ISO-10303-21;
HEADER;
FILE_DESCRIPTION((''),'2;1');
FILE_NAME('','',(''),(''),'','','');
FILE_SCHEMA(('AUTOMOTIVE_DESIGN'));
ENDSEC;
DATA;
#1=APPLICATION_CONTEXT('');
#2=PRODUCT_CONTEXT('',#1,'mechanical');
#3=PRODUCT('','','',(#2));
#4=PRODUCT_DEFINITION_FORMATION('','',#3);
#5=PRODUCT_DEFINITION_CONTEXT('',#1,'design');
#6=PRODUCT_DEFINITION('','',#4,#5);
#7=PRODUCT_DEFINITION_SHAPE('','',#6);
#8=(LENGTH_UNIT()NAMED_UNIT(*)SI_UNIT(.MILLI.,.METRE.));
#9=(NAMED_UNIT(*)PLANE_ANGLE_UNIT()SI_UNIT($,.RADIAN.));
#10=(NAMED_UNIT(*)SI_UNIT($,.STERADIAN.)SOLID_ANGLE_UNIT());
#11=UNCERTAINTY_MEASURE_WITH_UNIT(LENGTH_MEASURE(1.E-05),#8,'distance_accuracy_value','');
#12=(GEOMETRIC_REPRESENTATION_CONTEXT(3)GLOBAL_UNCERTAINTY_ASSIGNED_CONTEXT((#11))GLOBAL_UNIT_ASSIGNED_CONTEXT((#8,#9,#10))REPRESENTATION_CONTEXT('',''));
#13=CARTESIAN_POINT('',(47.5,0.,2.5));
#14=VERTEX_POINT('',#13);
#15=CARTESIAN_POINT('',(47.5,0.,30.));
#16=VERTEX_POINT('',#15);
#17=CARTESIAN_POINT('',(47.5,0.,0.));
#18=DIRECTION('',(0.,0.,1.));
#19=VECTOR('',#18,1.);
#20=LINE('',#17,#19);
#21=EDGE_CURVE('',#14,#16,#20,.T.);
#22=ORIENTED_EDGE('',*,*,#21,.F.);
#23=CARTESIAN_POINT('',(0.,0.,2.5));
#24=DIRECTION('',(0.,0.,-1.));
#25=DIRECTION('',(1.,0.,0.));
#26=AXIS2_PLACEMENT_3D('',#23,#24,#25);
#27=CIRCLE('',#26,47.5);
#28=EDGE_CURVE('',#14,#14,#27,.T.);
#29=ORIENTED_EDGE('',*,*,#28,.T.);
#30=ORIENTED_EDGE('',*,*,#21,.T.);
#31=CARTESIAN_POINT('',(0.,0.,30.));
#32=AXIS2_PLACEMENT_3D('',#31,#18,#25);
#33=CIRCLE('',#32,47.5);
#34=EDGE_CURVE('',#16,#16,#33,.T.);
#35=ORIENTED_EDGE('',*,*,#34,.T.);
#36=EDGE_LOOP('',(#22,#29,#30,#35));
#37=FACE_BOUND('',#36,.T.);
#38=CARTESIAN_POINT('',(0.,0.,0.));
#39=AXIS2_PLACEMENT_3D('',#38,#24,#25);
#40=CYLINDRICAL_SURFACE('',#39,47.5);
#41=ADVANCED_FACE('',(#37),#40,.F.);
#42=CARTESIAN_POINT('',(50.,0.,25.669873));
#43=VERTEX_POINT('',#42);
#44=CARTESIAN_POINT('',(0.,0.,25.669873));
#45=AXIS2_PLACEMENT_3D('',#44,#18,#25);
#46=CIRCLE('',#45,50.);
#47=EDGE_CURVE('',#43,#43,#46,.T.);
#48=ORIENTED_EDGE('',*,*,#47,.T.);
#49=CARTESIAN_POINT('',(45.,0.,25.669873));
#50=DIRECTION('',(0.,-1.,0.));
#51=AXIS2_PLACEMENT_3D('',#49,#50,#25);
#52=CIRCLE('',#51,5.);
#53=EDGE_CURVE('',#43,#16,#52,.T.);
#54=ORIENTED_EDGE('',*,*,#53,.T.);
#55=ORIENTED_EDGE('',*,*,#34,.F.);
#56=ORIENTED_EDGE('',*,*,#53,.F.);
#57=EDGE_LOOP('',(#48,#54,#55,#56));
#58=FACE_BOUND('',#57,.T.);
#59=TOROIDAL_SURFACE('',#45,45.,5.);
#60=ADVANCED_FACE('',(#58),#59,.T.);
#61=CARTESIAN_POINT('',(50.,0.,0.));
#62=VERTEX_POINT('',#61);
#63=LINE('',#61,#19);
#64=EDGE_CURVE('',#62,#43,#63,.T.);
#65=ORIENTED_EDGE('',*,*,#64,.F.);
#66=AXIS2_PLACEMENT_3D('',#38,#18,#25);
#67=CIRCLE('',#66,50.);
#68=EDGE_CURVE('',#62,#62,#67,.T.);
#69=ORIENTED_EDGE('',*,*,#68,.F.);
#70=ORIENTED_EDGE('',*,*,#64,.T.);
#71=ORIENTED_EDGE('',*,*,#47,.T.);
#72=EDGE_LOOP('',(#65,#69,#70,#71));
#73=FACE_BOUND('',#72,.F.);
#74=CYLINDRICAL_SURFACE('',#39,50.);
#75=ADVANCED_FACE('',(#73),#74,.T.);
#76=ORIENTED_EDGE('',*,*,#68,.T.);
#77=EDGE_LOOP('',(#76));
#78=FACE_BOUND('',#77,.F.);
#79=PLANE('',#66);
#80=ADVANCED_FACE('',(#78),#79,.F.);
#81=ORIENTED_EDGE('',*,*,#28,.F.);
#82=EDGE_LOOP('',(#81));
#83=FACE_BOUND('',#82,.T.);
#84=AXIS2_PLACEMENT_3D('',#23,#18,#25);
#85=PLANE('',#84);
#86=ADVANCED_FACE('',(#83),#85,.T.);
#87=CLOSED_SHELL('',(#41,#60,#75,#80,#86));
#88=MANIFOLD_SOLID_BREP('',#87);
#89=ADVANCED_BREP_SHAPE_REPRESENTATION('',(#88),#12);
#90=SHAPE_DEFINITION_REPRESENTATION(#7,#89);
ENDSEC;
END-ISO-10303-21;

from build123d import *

# Parameters (mm, degrees)
F0_R     = 50
F1_DEPTH = 30
F2_T     = -2.5


# Not quite as in the source:
# - a fillet or chamfer that OpenCascade refuses, or shapes differently, is made with other operations: its cross-section is extruded or revolved along the edge and cut away or added


with BuildPart() as f1:
    # F0 (on Top) → F1 (new body)
    with BuildSketch(Plane.XY):
        Circle(F0_R)
    extrude(amount=F1_DEPTH)

    # F2
    f2_openings = [f1.faces().sort_by_distance(p)[0] for p in [
        (0, 0, 30),
    ]]
    offset(amount=F2_T, openings=f2_openings)

    # F3: fillet of radius 5 on 1 edges, made by hand

    # F3_s1 → F3_t2 (revolve, cut)
    with BuildSketch(Plane.XZ):
        with BuildLine():
            ThreePointArc((50, 25.6698729811), (49.3301270189, 28.1698729811), (47.5, 30))
            Line((47.5, 30), (50, 30))
            Line((50, 30), (50, 25.6698729811))
        make_face()
    revolve(axis=Axis((0, 0, 30), (0, 0, 1)), mode=Mode.SUBTRACT)


solid = f1.part
